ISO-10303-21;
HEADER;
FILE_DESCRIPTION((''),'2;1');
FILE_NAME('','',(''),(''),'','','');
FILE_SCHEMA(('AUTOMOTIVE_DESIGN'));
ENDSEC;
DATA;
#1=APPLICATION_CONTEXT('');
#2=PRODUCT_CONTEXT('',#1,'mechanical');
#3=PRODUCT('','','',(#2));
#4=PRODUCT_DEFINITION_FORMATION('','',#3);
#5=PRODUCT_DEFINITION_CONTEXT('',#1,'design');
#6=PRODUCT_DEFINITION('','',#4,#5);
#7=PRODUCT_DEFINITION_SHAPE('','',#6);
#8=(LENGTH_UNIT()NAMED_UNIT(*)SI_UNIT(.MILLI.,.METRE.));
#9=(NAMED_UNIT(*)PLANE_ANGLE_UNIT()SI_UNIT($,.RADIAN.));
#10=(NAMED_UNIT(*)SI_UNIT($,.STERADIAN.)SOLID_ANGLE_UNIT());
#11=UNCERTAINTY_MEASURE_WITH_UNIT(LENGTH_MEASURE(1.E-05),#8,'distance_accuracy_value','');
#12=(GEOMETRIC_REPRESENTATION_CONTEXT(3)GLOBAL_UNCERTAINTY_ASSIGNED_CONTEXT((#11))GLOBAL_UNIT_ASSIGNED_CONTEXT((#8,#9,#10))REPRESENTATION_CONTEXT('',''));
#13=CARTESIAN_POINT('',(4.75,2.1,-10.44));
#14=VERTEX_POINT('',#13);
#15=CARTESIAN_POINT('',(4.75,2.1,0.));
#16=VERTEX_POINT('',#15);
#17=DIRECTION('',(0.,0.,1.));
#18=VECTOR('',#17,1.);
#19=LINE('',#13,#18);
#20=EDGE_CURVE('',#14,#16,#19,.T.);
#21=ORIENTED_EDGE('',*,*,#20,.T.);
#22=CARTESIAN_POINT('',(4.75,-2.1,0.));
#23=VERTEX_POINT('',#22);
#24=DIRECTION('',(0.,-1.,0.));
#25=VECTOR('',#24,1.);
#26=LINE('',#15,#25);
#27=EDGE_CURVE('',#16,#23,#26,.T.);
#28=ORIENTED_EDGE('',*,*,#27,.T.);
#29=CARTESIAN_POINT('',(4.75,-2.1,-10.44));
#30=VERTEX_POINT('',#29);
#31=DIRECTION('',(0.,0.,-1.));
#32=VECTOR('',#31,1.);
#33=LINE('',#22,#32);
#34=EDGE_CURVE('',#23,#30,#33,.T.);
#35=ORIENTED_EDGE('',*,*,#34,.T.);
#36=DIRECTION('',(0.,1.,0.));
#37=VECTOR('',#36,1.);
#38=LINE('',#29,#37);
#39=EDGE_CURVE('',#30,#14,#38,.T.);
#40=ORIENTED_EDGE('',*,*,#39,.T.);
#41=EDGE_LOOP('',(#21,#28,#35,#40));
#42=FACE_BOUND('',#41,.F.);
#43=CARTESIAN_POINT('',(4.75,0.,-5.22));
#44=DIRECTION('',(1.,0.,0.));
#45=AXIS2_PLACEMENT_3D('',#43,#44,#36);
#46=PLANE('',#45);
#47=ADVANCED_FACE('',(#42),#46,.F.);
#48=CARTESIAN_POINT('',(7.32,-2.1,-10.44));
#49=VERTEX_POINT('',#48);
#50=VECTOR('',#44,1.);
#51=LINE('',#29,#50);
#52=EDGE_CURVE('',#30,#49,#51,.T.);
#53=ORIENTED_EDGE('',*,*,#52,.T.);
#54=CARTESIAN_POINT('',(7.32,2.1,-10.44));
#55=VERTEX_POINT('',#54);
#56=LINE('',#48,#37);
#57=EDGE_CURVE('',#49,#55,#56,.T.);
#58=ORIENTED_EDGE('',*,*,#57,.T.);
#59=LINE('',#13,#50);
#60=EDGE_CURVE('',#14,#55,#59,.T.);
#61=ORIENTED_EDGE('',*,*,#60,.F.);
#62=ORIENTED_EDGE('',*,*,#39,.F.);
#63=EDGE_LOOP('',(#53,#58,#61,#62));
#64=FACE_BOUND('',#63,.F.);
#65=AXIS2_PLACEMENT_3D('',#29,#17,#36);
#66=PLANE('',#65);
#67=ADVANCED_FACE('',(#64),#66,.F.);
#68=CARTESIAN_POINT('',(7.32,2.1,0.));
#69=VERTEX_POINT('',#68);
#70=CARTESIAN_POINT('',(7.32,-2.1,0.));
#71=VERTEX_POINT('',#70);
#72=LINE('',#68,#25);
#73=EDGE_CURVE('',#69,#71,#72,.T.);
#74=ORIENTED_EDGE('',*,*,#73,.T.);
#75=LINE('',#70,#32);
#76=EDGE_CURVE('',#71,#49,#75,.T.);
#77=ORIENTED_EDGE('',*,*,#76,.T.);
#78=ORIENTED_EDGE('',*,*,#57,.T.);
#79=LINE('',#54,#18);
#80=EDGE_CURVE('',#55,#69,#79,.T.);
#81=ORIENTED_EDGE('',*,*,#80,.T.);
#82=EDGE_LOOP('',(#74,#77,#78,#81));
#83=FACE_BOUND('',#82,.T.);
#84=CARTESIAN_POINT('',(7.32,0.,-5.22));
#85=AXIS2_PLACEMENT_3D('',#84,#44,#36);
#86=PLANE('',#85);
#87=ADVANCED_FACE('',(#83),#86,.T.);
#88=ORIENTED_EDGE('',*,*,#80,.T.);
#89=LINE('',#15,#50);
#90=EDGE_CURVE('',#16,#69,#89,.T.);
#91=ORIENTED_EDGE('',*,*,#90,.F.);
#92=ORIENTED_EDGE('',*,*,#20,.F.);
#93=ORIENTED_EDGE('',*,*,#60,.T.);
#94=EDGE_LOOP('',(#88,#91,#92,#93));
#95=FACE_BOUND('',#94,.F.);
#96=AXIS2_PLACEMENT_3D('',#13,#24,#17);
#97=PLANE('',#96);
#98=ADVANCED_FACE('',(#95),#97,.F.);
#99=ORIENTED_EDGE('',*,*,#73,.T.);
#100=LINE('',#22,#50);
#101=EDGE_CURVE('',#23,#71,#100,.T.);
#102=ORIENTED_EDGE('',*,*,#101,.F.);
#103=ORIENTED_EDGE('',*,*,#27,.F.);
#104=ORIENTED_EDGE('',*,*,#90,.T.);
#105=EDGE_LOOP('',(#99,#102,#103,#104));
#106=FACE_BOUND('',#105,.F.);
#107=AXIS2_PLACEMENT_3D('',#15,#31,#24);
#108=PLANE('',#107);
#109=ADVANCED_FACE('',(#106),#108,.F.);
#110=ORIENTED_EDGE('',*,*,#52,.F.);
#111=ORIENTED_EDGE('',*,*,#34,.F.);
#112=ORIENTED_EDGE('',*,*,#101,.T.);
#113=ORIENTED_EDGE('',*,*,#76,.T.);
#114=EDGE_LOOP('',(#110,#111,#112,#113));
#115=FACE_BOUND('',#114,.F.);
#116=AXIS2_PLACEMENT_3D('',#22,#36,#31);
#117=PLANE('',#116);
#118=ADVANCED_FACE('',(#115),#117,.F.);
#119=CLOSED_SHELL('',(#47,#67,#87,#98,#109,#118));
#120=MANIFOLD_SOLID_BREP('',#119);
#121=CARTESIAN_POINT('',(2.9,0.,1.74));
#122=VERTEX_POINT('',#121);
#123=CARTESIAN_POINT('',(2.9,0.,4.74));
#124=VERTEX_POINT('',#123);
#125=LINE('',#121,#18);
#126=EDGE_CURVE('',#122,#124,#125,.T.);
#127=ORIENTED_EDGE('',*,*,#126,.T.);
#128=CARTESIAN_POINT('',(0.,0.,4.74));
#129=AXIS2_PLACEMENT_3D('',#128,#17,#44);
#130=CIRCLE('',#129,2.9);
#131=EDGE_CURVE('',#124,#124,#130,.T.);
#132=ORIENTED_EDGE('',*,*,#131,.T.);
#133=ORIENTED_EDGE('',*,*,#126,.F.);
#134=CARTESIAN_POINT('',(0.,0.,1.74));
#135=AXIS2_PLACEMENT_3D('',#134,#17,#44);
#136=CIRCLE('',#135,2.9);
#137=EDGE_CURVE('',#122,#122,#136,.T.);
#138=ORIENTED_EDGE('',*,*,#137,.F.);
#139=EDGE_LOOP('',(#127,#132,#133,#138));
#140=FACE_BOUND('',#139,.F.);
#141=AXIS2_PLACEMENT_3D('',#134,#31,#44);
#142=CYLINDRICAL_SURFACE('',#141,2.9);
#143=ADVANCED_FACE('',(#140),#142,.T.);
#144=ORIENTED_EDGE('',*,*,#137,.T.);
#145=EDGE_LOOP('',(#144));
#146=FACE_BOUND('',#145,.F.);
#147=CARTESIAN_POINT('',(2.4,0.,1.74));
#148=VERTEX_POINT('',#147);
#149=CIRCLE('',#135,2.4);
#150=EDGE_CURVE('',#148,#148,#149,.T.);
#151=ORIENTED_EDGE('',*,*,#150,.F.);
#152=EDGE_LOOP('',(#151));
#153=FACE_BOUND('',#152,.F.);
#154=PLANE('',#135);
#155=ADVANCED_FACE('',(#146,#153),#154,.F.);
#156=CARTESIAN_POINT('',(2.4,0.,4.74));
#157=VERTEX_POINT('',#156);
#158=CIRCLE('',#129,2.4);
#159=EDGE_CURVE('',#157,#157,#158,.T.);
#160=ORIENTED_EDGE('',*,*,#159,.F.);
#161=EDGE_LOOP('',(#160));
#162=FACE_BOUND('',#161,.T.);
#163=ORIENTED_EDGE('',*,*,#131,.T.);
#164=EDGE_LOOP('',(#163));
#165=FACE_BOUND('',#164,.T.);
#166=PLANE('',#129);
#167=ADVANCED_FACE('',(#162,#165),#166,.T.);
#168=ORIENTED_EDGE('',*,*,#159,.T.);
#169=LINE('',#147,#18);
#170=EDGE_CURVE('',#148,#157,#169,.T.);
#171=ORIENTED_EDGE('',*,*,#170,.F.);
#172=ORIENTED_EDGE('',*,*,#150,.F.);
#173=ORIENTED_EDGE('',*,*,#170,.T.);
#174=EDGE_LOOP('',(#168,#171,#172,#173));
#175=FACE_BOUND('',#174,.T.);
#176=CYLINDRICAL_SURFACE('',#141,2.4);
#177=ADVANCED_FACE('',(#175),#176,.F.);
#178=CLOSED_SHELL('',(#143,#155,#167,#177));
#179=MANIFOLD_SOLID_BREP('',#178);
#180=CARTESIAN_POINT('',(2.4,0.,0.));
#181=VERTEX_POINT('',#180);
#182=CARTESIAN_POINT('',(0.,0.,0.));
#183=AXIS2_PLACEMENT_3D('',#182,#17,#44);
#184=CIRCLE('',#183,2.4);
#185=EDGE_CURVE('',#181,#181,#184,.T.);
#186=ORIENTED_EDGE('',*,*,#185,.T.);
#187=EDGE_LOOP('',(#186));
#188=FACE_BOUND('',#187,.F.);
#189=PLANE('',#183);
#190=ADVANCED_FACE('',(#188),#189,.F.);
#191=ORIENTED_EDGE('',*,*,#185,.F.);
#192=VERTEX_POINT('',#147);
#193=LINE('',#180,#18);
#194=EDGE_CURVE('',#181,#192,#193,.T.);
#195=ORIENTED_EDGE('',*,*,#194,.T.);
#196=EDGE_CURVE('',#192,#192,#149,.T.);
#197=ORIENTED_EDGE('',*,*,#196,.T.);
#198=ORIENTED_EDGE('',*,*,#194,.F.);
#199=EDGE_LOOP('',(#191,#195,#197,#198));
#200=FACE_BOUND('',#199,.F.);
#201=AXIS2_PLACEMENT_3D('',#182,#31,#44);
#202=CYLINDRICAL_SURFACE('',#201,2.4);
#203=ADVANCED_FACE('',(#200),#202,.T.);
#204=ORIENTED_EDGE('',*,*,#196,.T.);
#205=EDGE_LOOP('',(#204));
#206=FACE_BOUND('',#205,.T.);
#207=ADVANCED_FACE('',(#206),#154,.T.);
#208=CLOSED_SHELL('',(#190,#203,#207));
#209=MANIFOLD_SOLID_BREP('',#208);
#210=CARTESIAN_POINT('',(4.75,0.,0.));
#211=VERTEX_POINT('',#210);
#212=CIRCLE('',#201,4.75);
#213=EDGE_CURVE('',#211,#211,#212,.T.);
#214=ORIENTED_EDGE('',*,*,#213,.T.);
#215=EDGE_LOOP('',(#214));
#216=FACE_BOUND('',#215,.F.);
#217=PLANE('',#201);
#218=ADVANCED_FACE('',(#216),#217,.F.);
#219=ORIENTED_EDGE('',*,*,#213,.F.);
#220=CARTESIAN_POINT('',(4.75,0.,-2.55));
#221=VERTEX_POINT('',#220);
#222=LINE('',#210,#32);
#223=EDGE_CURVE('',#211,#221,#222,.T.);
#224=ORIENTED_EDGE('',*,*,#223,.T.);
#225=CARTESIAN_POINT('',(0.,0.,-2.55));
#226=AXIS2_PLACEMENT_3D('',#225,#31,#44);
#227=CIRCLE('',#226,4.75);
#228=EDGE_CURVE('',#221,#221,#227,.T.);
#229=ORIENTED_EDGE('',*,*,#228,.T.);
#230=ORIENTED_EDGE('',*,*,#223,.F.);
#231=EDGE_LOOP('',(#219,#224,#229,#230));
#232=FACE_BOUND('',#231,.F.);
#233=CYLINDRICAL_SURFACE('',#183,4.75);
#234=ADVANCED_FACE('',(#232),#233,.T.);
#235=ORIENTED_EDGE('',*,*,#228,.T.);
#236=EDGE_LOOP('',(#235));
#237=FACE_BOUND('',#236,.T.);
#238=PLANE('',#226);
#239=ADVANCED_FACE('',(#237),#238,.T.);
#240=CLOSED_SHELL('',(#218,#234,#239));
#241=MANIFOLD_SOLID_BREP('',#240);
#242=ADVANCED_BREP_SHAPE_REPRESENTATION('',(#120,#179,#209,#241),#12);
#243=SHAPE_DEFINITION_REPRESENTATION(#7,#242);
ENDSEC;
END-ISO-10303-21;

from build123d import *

# Parameters (mm, degrees)
F0_R     = 2.4
F1_DEPTH = 1.74
F2_R     = 2.9
F2_R_2   = 2.4
F3_DEPTH = 3
F4_R     = 4.75
F4_R_2   = 2.4
F5_DEPTH = 2.55
F8_DEPTH = 2.57


with BuildPart() as f1:
    # F0 (on Top) → F1 (new body)
    with BuildSketch(Plane.XY):
        Circle(F0_R)
    extrude(amount=F1_DEPTH)


with BuildPart() as f3:
    # F2 (on face) → F3 (new body)
    with BuildSketch(Plane.XY.offset(1.74)):
        Circle(F2_R)
        Circle(F2_R_2, mode=Mode.SUBTRACT)
    extrude(amount=F3_DEPTH)


with BuildPart() as f5:
    # F4 (on face) → F5 (new body)
    with BuildSketch(Plane(origin=(0, 0, 0), x_dir=(1, 0, 0), z_dir=(0, 0, -1))):
        Circle(F4_R)
        Circle(F4_R_2, mode=Mode.SUBTRACT)
        Circle(F4_R_2)
    extrude(amount=F5_DEPTH)


with BuildPart() as f8:
    # F7 (on offset) → F8 (new body)
    with BuildSketch(Plane.YZ.offset(4.75)):
        Polygon((2.1, 0), (0, 0), (-2.1, 0), (-2.1, -10.44), (2.1, -10.44), align=None)
    extrude(amount=F8_DEPTH)


solid = Compound([f1.part, f3.part, f5.part, f8.part])
